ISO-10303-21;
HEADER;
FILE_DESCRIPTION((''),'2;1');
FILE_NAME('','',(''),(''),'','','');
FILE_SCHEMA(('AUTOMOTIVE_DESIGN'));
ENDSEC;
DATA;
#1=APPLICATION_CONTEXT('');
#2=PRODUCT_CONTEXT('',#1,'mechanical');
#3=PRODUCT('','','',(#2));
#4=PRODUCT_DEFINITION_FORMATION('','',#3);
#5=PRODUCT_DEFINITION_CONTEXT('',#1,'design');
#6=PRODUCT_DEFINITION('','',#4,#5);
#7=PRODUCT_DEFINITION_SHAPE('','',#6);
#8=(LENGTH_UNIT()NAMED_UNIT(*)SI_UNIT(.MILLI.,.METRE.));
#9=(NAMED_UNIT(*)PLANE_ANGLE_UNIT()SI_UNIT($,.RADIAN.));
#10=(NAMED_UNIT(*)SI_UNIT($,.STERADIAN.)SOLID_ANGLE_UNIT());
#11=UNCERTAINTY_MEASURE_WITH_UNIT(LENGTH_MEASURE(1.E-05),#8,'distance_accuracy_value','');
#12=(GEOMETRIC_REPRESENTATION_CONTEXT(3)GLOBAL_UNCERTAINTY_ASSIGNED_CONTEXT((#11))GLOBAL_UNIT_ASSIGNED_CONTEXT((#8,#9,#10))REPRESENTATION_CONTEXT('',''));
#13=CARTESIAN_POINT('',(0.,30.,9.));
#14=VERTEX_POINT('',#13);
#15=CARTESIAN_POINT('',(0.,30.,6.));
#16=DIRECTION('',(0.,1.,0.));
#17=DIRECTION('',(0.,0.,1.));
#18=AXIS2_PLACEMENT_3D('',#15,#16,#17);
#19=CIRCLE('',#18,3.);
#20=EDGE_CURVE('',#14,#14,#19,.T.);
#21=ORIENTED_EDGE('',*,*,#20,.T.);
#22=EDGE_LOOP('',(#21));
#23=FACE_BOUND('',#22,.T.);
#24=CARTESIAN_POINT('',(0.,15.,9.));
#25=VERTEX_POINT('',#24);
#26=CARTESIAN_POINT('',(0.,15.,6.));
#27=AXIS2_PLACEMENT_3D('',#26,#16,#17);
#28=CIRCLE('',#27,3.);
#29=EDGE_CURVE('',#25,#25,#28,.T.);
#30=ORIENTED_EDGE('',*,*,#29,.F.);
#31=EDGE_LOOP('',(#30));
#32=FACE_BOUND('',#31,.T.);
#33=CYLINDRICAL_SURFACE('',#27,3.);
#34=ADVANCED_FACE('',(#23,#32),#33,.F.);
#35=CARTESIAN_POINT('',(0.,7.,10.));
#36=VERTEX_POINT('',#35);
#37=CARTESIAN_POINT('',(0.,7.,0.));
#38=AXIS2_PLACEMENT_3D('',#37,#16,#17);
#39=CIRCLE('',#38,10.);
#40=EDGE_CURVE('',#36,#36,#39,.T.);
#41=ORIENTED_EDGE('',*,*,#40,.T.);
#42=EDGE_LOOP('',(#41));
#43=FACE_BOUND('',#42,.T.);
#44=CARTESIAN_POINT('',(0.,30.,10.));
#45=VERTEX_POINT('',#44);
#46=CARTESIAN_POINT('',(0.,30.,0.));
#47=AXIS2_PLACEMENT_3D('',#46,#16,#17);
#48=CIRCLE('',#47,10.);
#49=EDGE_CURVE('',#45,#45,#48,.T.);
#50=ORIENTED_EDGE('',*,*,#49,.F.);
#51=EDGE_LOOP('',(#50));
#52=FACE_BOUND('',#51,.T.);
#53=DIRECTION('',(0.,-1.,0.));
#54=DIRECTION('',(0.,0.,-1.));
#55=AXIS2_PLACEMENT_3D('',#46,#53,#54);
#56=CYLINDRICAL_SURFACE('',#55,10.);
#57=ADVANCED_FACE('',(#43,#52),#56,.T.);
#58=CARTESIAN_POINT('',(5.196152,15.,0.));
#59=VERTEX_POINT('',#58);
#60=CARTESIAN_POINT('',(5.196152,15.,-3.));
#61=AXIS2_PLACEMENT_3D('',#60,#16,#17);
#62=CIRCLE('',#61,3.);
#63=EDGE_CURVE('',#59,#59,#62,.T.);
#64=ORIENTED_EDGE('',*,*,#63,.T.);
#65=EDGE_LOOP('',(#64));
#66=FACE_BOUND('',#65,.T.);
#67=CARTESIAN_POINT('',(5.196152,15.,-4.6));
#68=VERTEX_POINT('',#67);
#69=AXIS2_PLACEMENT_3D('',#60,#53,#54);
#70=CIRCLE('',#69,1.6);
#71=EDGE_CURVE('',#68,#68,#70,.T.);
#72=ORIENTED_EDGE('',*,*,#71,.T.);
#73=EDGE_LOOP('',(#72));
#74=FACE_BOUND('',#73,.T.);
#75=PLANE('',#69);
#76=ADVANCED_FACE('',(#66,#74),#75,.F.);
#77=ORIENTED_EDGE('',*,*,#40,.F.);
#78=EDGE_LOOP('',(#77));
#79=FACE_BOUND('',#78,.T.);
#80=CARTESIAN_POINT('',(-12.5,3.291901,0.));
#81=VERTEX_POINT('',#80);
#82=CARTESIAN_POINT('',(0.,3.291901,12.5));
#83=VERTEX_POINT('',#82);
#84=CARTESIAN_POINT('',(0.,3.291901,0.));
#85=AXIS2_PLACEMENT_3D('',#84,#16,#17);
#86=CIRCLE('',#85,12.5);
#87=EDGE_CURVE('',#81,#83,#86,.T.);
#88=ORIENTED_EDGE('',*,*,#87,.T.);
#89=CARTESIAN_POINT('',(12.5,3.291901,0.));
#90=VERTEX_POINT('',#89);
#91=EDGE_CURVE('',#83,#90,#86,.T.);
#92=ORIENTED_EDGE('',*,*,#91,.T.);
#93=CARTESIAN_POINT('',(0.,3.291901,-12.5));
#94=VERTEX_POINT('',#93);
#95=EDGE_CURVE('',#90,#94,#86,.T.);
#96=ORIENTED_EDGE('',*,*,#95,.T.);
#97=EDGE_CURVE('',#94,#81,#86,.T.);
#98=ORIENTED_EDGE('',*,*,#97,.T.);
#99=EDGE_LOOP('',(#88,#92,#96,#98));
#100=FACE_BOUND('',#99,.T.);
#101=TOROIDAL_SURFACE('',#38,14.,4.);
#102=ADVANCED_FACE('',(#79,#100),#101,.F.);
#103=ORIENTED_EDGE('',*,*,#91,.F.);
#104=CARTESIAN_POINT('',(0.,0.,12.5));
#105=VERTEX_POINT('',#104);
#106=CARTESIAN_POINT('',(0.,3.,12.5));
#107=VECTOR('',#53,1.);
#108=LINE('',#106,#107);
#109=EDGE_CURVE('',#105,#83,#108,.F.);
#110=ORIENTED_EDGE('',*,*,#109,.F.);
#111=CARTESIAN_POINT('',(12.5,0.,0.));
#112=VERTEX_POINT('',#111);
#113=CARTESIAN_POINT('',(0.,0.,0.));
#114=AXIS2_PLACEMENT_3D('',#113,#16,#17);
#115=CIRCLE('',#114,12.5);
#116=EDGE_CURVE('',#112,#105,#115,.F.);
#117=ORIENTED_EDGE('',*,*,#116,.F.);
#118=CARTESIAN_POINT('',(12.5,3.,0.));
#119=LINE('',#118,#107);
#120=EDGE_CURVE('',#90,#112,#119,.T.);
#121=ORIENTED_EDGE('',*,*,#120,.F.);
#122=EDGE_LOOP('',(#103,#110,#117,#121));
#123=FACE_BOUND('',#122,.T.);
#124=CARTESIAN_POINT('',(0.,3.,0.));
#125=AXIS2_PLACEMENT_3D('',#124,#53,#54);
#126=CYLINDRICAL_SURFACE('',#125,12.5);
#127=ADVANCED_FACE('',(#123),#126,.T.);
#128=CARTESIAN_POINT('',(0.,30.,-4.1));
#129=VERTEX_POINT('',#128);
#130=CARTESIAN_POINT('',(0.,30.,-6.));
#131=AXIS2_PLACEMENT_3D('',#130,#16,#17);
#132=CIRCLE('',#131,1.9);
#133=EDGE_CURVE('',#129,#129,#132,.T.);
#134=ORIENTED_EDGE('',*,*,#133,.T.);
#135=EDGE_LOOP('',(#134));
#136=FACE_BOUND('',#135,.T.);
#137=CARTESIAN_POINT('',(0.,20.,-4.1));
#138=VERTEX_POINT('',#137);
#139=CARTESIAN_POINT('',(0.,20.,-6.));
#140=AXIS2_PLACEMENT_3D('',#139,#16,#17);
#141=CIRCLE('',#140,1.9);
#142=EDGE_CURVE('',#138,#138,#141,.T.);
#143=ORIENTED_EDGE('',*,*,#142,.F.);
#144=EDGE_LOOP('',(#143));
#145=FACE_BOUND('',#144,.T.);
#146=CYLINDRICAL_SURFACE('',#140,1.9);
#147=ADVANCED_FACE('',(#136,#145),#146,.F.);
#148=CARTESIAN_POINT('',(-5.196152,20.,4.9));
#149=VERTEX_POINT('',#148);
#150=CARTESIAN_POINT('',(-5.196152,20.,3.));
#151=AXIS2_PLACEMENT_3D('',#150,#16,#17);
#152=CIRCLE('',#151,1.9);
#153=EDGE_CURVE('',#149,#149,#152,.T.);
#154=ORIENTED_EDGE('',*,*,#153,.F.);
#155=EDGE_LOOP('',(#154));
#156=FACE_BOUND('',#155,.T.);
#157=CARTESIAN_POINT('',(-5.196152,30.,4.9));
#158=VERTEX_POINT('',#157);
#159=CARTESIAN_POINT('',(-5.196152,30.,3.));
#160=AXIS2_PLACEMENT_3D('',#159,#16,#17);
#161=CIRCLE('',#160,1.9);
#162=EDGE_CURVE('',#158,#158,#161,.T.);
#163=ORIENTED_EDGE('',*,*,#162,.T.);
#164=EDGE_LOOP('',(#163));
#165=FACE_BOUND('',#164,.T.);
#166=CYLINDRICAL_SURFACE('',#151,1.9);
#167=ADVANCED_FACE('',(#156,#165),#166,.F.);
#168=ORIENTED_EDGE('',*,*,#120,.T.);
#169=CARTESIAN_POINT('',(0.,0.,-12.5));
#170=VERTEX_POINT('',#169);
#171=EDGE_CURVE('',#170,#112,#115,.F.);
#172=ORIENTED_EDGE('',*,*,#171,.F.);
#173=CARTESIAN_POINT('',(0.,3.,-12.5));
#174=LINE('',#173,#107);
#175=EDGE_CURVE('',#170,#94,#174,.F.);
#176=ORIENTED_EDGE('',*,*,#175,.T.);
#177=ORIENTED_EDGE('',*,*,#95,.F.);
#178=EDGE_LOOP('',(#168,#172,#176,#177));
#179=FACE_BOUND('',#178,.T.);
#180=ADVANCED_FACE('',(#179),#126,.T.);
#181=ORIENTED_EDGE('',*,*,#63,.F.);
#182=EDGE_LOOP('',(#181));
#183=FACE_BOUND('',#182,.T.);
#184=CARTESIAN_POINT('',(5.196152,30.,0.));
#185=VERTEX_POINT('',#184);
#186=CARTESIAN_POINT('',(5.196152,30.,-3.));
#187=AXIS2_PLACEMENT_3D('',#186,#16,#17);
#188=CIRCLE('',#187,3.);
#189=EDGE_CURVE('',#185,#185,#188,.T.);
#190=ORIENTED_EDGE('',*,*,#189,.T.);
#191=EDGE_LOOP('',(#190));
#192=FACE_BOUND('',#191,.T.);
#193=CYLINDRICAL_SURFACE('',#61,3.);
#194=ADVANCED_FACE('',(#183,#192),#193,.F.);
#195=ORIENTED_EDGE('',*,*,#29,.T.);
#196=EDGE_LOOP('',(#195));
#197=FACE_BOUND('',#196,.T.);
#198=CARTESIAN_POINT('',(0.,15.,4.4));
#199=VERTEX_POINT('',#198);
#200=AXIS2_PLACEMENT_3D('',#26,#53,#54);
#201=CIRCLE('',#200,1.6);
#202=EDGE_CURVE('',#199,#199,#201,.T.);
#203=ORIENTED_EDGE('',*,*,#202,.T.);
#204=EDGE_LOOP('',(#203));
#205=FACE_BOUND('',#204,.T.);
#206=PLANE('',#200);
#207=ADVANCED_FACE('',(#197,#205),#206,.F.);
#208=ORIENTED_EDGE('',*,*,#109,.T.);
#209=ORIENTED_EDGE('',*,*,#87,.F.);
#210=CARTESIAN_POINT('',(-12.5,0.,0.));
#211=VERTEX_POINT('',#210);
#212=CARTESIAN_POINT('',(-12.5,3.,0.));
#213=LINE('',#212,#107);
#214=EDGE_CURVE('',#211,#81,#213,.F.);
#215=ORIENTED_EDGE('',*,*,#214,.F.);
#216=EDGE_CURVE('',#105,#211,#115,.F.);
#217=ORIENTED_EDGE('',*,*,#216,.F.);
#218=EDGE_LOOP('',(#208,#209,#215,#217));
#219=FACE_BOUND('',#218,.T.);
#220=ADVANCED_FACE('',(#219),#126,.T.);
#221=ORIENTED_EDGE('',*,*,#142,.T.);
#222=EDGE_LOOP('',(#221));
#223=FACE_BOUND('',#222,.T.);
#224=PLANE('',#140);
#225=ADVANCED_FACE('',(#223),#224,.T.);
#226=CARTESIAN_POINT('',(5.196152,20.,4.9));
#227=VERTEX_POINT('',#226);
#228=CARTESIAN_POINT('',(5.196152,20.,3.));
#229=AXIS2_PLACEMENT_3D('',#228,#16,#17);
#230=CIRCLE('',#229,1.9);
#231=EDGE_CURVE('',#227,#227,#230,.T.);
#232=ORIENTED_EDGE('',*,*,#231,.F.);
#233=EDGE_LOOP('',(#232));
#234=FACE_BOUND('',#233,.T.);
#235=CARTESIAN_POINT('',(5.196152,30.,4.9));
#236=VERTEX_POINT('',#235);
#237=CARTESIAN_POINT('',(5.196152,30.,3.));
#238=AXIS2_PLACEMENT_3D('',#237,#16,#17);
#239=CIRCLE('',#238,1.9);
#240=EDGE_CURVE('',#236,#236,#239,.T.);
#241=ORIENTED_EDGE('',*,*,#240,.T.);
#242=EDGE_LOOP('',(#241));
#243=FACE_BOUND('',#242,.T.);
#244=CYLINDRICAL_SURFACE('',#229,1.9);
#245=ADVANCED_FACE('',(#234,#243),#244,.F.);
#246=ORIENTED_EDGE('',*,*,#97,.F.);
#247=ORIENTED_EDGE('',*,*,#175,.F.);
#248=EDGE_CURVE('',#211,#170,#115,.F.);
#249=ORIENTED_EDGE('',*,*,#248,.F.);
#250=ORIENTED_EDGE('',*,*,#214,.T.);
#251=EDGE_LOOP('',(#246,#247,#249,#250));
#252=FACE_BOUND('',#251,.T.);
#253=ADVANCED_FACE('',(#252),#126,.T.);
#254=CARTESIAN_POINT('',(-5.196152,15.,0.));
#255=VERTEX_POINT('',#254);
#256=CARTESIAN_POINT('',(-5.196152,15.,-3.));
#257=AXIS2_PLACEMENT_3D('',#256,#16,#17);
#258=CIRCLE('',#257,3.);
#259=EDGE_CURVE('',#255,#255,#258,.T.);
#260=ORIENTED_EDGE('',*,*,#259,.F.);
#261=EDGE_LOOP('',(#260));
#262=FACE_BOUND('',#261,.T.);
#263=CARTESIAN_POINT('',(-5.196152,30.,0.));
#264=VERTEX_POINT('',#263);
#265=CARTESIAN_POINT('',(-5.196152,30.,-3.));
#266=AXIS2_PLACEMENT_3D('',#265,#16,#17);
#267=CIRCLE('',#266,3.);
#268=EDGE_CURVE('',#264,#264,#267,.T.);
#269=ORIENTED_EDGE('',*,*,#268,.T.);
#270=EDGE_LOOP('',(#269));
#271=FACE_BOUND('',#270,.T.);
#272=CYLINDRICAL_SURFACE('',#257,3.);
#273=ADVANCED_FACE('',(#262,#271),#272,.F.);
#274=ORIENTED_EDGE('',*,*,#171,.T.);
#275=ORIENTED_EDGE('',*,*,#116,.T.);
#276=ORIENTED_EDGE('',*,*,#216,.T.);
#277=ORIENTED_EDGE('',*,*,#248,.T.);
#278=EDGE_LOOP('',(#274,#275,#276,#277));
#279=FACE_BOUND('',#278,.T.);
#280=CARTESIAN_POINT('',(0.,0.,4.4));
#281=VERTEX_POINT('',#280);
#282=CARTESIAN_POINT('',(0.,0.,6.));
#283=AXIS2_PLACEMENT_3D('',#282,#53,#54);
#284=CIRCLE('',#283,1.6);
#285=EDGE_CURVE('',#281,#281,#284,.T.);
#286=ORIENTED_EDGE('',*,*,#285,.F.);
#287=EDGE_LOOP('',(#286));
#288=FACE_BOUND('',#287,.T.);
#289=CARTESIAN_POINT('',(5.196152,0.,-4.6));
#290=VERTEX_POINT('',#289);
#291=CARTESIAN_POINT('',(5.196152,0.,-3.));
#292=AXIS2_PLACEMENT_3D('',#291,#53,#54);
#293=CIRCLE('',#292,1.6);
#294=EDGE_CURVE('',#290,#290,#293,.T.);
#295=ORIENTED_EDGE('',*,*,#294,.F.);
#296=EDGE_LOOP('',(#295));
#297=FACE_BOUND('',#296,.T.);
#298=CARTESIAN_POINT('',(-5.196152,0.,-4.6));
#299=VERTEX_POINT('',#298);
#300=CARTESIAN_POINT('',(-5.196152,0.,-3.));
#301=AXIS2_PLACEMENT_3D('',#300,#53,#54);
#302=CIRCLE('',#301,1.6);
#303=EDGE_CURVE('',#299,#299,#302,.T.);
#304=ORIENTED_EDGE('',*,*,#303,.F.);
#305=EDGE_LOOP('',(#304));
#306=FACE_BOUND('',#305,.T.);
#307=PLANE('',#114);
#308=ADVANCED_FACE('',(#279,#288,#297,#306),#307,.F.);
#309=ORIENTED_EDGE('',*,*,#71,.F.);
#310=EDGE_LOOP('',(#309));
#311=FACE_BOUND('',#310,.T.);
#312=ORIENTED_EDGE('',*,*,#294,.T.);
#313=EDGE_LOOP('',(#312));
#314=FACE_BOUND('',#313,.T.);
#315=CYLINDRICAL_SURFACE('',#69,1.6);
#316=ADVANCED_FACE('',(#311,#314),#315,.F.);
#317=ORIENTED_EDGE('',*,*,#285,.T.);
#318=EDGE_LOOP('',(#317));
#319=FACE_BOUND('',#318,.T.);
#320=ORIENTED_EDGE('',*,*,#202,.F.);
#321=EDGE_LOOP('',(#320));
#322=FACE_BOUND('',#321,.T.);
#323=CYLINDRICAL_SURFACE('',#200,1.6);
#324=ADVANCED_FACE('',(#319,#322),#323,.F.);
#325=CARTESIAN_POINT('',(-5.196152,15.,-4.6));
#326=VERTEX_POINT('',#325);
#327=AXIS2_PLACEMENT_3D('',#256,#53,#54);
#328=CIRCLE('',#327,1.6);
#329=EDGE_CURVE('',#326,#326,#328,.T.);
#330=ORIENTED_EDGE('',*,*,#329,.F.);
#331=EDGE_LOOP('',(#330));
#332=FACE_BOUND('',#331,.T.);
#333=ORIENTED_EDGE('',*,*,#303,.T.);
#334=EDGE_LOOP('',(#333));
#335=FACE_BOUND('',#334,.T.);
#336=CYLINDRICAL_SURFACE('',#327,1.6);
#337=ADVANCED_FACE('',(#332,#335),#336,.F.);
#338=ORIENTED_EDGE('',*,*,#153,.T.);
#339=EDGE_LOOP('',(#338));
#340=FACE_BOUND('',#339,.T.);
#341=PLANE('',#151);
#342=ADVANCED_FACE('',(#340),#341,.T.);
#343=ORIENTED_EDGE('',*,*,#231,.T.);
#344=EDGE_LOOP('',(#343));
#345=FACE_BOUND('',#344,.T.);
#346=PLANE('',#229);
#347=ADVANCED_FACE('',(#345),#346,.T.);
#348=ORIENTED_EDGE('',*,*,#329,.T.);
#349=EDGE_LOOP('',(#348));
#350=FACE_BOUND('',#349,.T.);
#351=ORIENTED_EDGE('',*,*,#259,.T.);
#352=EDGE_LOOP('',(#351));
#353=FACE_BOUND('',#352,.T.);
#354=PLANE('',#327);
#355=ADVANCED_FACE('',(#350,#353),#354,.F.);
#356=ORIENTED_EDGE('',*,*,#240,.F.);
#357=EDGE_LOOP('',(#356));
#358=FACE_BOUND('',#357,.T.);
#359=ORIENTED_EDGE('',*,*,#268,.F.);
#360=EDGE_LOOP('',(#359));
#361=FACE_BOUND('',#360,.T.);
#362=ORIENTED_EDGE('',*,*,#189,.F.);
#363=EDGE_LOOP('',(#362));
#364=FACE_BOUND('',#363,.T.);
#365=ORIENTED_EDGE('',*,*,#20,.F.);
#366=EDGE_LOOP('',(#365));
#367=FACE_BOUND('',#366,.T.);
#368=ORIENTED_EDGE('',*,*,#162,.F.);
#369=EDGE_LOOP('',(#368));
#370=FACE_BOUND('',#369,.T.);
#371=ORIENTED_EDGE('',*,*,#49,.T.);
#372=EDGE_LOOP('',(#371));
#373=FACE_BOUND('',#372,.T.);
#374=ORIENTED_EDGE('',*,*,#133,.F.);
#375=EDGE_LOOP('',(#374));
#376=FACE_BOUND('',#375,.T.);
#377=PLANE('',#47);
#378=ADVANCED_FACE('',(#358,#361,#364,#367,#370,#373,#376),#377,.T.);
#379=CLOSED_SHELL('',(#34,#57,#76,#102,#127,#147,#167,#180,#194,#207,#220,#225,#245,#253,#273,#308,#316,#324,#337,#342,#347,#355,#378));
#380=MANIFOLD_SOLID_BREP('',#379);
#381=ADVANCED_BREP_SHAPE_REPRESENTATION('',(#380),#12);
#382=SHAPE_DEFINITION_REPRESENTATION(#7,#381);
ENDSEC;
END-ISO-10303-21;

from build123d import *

# Parameters (mm, degrees)
SKETCH_1_R          = 10
EXTRUDE_1_DEPTH     = 30
SKETCH_2_R          = 1.85
CUT_EXTRUDE_1_DEPTH = 34.166247904
SKETCH_3_R          = 1.85
SKETCH_3_R_2        = 1.6
EXTRUDE_2_DEPTH     = 15
CUT_EXTRUDE_START   = -15
SKETCH_4_R          = 2.5
SKETCH_4_R_2        = 1.85
CUT_EXTRUDE_2_DEPTH = 15
EXTRUDE_START       = -15
SKETCH_5_R          = 1.85
SKETCH_5_R_2        = 1.6
EXTRUDE_3_DEPTH     = 15
SKETCH_6_R          = 2.5
CUT_EXTRUDE_4_DEPTH = 15
SKETCH_8_W          = 25
SKETCH_8_H          = 25
SKETCH_8_R          = 10
EXTRUDE_4_DEPTH     = 3
FILLET_1_R          = 4
FILLET_6_R          = 12.5
FILLET_7_R          = 12.5
FILLET_8_R          = 12.5
FILLET_9_R          = 12.5
EXTRUDE_START_2     = -25
SKETCH_9_R          = 2.5
EXTRUDE_6_DEPTH     = 25
SKETCH_10_R         = 1.9
CUT_EXTRUDE_5_DEPTH = 10
SKETCH_11_R         = 3
CUT_EXTRUDE_6_DEPTH = 15


# Some blends are built 0.0001 mm under size
with BuildPart() as part:
    # 草图1 → 凸台-拉伸1 (new body)
    with BuildSketch(Plane(origin=(0, 0, 0), x_dir=(1, 0, 0), z_dir=(0, 1, 0))):
        with Locations(Location((0, 0, 0), (0, 0, 270))):
            Circle(SKETCH_1_R)
    extrude(amount=EXTRUDE_1_DEPTH)

    # 草图2 → 切除-拉伸1 (cut, through all)
    with BuildSketch(Plane(origin=(0, 30, 0), x_dir=(1, 0, 0), z_dir=(0, 1, 0))):
        with Locations(Location((0, 6, 0), (0, 0, 270))):
            Circle(SKETCH_2_R)
        with Locations(Location((5.196152423, 3, 0), (0, 0, 270))):
            Circle(SKETCH_2_R)
        with Locations(Location((5.196152423, -3, 0), (0, 0, 270))):
            Circle(SKETCH_2_R)
        with Locations(Location((0, -6, 0), (0, 0, 270))):
            Circle(SKETCH_2_R)
        with Locations(Location((-5.196152423, -3, 0), (0, 0, 270))):
            Circle(SKETCH_2_R)
        with Locations(Location((-5.196152423, 3, 0), (0, 0, 270))):
            Circle(SKETCH_2_R)
    extrude(amount=-CUT_EXTRUDE_1_DEPTH, mode=Mode.SUBTRACT)

    # 草图3 → 凸台-拉伸2 (add)
    # profile 1 of 3: a face of its own
    with BuildSketch(Plane(origin=(0, 30, 0), x_dir=(1, 0, 0), z_dir=(0, 1, 0))):
        with Locations(Location((0, 6, 0), (0, 0, 270))):
            Circle(SKETCH_3_R)
        with Locations(Location((0, 6, 0), (0, 0, 270))):
            Circle(SKETCH_3_R_2, mode=Mode.SUBTRACT)
    # profile 2 of 3: a face of its own
    with BuildSketch(Plane(origin=(0, 30, 0), x_dir=(1, 0, 0), z_dir=(0, 1, 0))):
        with Locations(Location((-5.196152423, -3, 0), (0, 0, 270))):
            Circle(SKETCH_3_R)
        with Locations(Location((-5.196152423, -3, 0), (0, 0, 270))):
            Circle(SKETCH_3_R_2, mode=Mode.SUBTRACT)
    # profile 3 of 3: a face of its own
    with BuildSketch(Plane(origin=(0, 30, 0), x_dir=(1, 0, 0), z_dir=(0, 1, 0))):
        with Locations(Location((5.196152423, -3, 0), (0, 0, 270))):
            Circle(SKETCH_3_R)
        with Locations(Location((5.196152423, -3, 0), (0, 0, 270))):
            Circle(SKETCH_3_R_2, mode=Mode.SUBTRACT)
    extrude(amount=-EXTRUDE_2_DEPTH)

    # 草图4 → 切除-拉伸2 (cut)
    # profile 1 of 3: a face of its own
    with BuildSketch(Plane.XZ.offset(CUT_EXTRUDE_START)):
        with Locations(Location((-5.196152423, 3, 0), (0, 0, 270))):
            Circle(SKETCH_4_R)
        with Locations((-5.196152423, 3)):
            Circle(SKETCH_4_R_2, mode=Mode.SUBTRACT)
    # profile 2 of 3: a face of its own
    with BuildSketch(Plane.XZ.offset(CUT_EXTRUDE_START)):
        with Locations(Location((5.196152423, 3, 0), (0, 0, 270))):
            Circle(SKETCH_4_R)
        with Locations((5.196152423, 3)):
            Circle(SKETCH_4_R_2, mode=Mode.SUBTRACT)
    # profile 3 of 3: a face of its own
    with BuildSketch(Plane.XZ.offset(CUT_EXTRUDE_START)):
        with Locations(Location((0, -6, 0), (0, 0, 270))):
            Circle(SKETCH_4_R)
        with Locations((0, -6)):
            Circle(SKETCH_4_R_2, mode=Mode.SUBTRACT)
    extrude(amount=CUT_EXTRUDE_2_DEPTH, mode=Mode.SUBTRACT)

    # 草图5 → 凸台-拉伸3 (add)
    # profile 1 of 3: a face of its own
    with BuildSketch(Plane.XZ.offset(EXTRUDE_START)):
        with Locations(Location((0, 6, 0), (0, 0, 90))):
            Circle(SKETCH_5_R)
        with Locations(Location((0, 6, 0), (0, 0, 270))):
            Circle(SKETCH_5_R_2, mode=Mode.SUBTRACT)
    # profile 2 of 3: a face of its own
    with BuildSketch(Plane.XZ.offset(EXTRUDE_START)):
        with Locations(Location((-5.196152423, -3, 0), (0, 0, 90))):
            Circle(SKETCH_5_R)
        with Locations(Location((-5.196152423, -3, 0), (0, 0, 270))):
            Circle(SKETCH_5_R_2, mode=Mode.SUBTRACT)
    # profile 3 of 3: a face of its own
    with BuildSketch(Plane.XZ.offset(EXTRUDE_START)):
        with Locations(Location((5.196152423, -3, 0), (0, 0, 90))):
            Circle(SKETCH_5_R)
        with Locations(Location((5.196152423, -3, 0), (0, 0, 270))):
            Circle(SKETCH_5_R_2, mode=Mode.SUBTRACT)
    extrude(amount=EXTRUDE_3_DEPTH)

    # 草图6 → 切除-拉伸4 (cut)
    with BuildSketch(Plane(origin=(0, 30, 0), x_dir=(1, 0, 0), z_dir=(0, 1, 0))):
        with Locations(Location((-5.196152423, 3, 0), (0, 0, 270))):
            Circle(SKETCH_6_R)
        with Locations(Location((5.196152423, 3, 0), (0, 0, 270))):
            Circle(SKETCH_6_R)
        with Locations(Location((0, -6, 0), (0, 0, 270))):
            Circle(SKETCH_6_R)
    extrude(amount=-CUT_EXTRUDE_4_DEPTH, mode=Mode.SUBTRACT)

    # 草图8 → 凸台-拉伸4 (add)
    with BuildSketch(Plane.XZ):
        Rectangle(SKETCH_8_W, SKETCH_8_H)
        with Locations(Location((0, 0, 0), (0, 0, 270))):
            Circle(SKETCH_8_R, mode=Mode.SUBTRACT)
    extrude(amount=-EXTRUDE_4_DEPTH)

    # 圆角1
    # the kernel refuses this fillet: 4 mm, written as the material it adds along each edge
    with BuildSketch(Plane(origin=(0, 3, 0), x_dir=(0, 0, 1), z_dir=(-1, 0, 0))) as fillet_1_piece_1_section:
        with BuildLine():
            CenterArc((10 + FILLET_1_R, FILLET_1_R), FILLET_1_R, 180, 90)
            Line((10 + FILLET_1_R, 0), (10, 0))
            Line((10, 0), (10, FILLET_1_R))
        make_face()
    fillet_1_piece_1 = revolve(axis=Axis((0, 3, 0), (0, 1, 0)), mode=Mode.PRIVATE)
    fillet_1_piece_1 = split(fillet_1_piece_1, bisect_by=Plane(origin=(-12.5, 4.125745955, -11.125745955), z_dir=(1, 0, 0)), keep=Keep.TOP, mode=Mode.PRIVATE)
    fillet_1_piece_1 = split(fillet_1_piece_1, bisect_by=Plane(origin=(0, 4.125745955, 12.5), z_dir=(0, 0, -1)), keep=Keep.TOP, mode=Mode.PRIVATE)
    fillet_1_piece_1 = split(fillet_1_piece_1, bisect_by=Plane(origin=(12.5, 4.125745955, -11.125745955), z_dir=(-1, 0, 0)), keep=Keep.TOP, mode=Mode.PRIVATE)
    fillet_1_piece_1 = split(fillet_1_piece_1, bisect_by=Plane(origin=(0, 4.125745955, -12.5), z_dir=(0, 0, 1)), keep=Keep.TOP, mode=Mode.PRIVATE)
    add(fillet_1_piece_1)

    # 圆角6
    fillet_6_edges = [part.edges().sort_by_distance(p)[0] for p in [
        (12.5, 1.5, 12.5),
    ]]
    fillet(fillet_6_edges, radius=FILLET_6_R)

    # 圆角7
    fillet_7_edges = [part.edges().sort_by_distance(p)[0] for p in [
        (-12.5, 1.5, 12.5),
    ]]
    fillet(fillet_7_edges, radius=FILLET_7_R - 0.0001)  # a hair under: the kernel refuses the full size

    # 圆角8
    fillet_8_edges = [part.edges().sort_by_distance(p)[0] for p in [
        (-12.5, 1.5, -12.5),
    ]]
    fillet(fillet_8_edges, radius=FILLET_8_R)

    # 圆角9
    fillet_9_edges = [part.edges().sort_by_distance(p)[0] for p in [
        (12.5, 1.5, -12.5),
    ]]
    fillet(fillet_9_edges, radius=FILLET_9_R - 0.0001)  # a hair under: the kernel refuses the full size

    # 草图9 → 凸台-拉伸6 (add)
    with BuildSketch(Plane.XZ.offset(EXTRUDE_START_2)):
        with Locations((5.196152423, 3)):
            Circle(SKETCH_9_R)
        with Locations((-5.196152423, 3)):
            Circle(SKETCH_9_R)
        with Locations((0, -6)):
            Circle(SKETCH_9_R)
    extrude(amount=EXTRUDE_6_DEPTH)

    # 草图10 → 切除-拉伸5 (cut)
    with BuildSketch(Plane(origin=(0, 30, 0), x_dir=(1, 0, 0), z_dir=(0, 1, 0))):
        with Locations(Location((0, 6, 0), (0, 0, 270))):
            Circle(SKETCH_10_R)
        with Locations(Location((-5.196152423, -3, 0), (0, 0, 270))):
            Circle(SKETCH_10_R)
        with Locations(Location((5.196152423, -3, 0), (0, 0, 270))):
            Circle(SKETCH_10_R)
    extrude(amount=-CUT_EXTRUDE_5_DEPTH, mode=Mode.SUBTRACT)

    # 草图11 → 切除-拉伸6 (cut)
    with BuildSketch(Plane(origin=(0, 30, 0), x_dir=(1, 0, 0), z_dir=(0, 1, 0))):
        with Locations(Location((-5.196152423, 3, 0), (0, 0, 270))):
            Circle(SKETCH_11_R)
        with Locations(Location((5.196152423, 3, 0), (0, 0, 270))):
            Circle(SKETCH_11_R)
        with Locations(Location((0, -6, 0), (0, 0, 270))):
            Circle(SKETCH_11_R)
    extrude(amount=-CUT_EXTRUDE_6_DEPTH, mode=Mode.SUBTRACT)


solid = part.part
